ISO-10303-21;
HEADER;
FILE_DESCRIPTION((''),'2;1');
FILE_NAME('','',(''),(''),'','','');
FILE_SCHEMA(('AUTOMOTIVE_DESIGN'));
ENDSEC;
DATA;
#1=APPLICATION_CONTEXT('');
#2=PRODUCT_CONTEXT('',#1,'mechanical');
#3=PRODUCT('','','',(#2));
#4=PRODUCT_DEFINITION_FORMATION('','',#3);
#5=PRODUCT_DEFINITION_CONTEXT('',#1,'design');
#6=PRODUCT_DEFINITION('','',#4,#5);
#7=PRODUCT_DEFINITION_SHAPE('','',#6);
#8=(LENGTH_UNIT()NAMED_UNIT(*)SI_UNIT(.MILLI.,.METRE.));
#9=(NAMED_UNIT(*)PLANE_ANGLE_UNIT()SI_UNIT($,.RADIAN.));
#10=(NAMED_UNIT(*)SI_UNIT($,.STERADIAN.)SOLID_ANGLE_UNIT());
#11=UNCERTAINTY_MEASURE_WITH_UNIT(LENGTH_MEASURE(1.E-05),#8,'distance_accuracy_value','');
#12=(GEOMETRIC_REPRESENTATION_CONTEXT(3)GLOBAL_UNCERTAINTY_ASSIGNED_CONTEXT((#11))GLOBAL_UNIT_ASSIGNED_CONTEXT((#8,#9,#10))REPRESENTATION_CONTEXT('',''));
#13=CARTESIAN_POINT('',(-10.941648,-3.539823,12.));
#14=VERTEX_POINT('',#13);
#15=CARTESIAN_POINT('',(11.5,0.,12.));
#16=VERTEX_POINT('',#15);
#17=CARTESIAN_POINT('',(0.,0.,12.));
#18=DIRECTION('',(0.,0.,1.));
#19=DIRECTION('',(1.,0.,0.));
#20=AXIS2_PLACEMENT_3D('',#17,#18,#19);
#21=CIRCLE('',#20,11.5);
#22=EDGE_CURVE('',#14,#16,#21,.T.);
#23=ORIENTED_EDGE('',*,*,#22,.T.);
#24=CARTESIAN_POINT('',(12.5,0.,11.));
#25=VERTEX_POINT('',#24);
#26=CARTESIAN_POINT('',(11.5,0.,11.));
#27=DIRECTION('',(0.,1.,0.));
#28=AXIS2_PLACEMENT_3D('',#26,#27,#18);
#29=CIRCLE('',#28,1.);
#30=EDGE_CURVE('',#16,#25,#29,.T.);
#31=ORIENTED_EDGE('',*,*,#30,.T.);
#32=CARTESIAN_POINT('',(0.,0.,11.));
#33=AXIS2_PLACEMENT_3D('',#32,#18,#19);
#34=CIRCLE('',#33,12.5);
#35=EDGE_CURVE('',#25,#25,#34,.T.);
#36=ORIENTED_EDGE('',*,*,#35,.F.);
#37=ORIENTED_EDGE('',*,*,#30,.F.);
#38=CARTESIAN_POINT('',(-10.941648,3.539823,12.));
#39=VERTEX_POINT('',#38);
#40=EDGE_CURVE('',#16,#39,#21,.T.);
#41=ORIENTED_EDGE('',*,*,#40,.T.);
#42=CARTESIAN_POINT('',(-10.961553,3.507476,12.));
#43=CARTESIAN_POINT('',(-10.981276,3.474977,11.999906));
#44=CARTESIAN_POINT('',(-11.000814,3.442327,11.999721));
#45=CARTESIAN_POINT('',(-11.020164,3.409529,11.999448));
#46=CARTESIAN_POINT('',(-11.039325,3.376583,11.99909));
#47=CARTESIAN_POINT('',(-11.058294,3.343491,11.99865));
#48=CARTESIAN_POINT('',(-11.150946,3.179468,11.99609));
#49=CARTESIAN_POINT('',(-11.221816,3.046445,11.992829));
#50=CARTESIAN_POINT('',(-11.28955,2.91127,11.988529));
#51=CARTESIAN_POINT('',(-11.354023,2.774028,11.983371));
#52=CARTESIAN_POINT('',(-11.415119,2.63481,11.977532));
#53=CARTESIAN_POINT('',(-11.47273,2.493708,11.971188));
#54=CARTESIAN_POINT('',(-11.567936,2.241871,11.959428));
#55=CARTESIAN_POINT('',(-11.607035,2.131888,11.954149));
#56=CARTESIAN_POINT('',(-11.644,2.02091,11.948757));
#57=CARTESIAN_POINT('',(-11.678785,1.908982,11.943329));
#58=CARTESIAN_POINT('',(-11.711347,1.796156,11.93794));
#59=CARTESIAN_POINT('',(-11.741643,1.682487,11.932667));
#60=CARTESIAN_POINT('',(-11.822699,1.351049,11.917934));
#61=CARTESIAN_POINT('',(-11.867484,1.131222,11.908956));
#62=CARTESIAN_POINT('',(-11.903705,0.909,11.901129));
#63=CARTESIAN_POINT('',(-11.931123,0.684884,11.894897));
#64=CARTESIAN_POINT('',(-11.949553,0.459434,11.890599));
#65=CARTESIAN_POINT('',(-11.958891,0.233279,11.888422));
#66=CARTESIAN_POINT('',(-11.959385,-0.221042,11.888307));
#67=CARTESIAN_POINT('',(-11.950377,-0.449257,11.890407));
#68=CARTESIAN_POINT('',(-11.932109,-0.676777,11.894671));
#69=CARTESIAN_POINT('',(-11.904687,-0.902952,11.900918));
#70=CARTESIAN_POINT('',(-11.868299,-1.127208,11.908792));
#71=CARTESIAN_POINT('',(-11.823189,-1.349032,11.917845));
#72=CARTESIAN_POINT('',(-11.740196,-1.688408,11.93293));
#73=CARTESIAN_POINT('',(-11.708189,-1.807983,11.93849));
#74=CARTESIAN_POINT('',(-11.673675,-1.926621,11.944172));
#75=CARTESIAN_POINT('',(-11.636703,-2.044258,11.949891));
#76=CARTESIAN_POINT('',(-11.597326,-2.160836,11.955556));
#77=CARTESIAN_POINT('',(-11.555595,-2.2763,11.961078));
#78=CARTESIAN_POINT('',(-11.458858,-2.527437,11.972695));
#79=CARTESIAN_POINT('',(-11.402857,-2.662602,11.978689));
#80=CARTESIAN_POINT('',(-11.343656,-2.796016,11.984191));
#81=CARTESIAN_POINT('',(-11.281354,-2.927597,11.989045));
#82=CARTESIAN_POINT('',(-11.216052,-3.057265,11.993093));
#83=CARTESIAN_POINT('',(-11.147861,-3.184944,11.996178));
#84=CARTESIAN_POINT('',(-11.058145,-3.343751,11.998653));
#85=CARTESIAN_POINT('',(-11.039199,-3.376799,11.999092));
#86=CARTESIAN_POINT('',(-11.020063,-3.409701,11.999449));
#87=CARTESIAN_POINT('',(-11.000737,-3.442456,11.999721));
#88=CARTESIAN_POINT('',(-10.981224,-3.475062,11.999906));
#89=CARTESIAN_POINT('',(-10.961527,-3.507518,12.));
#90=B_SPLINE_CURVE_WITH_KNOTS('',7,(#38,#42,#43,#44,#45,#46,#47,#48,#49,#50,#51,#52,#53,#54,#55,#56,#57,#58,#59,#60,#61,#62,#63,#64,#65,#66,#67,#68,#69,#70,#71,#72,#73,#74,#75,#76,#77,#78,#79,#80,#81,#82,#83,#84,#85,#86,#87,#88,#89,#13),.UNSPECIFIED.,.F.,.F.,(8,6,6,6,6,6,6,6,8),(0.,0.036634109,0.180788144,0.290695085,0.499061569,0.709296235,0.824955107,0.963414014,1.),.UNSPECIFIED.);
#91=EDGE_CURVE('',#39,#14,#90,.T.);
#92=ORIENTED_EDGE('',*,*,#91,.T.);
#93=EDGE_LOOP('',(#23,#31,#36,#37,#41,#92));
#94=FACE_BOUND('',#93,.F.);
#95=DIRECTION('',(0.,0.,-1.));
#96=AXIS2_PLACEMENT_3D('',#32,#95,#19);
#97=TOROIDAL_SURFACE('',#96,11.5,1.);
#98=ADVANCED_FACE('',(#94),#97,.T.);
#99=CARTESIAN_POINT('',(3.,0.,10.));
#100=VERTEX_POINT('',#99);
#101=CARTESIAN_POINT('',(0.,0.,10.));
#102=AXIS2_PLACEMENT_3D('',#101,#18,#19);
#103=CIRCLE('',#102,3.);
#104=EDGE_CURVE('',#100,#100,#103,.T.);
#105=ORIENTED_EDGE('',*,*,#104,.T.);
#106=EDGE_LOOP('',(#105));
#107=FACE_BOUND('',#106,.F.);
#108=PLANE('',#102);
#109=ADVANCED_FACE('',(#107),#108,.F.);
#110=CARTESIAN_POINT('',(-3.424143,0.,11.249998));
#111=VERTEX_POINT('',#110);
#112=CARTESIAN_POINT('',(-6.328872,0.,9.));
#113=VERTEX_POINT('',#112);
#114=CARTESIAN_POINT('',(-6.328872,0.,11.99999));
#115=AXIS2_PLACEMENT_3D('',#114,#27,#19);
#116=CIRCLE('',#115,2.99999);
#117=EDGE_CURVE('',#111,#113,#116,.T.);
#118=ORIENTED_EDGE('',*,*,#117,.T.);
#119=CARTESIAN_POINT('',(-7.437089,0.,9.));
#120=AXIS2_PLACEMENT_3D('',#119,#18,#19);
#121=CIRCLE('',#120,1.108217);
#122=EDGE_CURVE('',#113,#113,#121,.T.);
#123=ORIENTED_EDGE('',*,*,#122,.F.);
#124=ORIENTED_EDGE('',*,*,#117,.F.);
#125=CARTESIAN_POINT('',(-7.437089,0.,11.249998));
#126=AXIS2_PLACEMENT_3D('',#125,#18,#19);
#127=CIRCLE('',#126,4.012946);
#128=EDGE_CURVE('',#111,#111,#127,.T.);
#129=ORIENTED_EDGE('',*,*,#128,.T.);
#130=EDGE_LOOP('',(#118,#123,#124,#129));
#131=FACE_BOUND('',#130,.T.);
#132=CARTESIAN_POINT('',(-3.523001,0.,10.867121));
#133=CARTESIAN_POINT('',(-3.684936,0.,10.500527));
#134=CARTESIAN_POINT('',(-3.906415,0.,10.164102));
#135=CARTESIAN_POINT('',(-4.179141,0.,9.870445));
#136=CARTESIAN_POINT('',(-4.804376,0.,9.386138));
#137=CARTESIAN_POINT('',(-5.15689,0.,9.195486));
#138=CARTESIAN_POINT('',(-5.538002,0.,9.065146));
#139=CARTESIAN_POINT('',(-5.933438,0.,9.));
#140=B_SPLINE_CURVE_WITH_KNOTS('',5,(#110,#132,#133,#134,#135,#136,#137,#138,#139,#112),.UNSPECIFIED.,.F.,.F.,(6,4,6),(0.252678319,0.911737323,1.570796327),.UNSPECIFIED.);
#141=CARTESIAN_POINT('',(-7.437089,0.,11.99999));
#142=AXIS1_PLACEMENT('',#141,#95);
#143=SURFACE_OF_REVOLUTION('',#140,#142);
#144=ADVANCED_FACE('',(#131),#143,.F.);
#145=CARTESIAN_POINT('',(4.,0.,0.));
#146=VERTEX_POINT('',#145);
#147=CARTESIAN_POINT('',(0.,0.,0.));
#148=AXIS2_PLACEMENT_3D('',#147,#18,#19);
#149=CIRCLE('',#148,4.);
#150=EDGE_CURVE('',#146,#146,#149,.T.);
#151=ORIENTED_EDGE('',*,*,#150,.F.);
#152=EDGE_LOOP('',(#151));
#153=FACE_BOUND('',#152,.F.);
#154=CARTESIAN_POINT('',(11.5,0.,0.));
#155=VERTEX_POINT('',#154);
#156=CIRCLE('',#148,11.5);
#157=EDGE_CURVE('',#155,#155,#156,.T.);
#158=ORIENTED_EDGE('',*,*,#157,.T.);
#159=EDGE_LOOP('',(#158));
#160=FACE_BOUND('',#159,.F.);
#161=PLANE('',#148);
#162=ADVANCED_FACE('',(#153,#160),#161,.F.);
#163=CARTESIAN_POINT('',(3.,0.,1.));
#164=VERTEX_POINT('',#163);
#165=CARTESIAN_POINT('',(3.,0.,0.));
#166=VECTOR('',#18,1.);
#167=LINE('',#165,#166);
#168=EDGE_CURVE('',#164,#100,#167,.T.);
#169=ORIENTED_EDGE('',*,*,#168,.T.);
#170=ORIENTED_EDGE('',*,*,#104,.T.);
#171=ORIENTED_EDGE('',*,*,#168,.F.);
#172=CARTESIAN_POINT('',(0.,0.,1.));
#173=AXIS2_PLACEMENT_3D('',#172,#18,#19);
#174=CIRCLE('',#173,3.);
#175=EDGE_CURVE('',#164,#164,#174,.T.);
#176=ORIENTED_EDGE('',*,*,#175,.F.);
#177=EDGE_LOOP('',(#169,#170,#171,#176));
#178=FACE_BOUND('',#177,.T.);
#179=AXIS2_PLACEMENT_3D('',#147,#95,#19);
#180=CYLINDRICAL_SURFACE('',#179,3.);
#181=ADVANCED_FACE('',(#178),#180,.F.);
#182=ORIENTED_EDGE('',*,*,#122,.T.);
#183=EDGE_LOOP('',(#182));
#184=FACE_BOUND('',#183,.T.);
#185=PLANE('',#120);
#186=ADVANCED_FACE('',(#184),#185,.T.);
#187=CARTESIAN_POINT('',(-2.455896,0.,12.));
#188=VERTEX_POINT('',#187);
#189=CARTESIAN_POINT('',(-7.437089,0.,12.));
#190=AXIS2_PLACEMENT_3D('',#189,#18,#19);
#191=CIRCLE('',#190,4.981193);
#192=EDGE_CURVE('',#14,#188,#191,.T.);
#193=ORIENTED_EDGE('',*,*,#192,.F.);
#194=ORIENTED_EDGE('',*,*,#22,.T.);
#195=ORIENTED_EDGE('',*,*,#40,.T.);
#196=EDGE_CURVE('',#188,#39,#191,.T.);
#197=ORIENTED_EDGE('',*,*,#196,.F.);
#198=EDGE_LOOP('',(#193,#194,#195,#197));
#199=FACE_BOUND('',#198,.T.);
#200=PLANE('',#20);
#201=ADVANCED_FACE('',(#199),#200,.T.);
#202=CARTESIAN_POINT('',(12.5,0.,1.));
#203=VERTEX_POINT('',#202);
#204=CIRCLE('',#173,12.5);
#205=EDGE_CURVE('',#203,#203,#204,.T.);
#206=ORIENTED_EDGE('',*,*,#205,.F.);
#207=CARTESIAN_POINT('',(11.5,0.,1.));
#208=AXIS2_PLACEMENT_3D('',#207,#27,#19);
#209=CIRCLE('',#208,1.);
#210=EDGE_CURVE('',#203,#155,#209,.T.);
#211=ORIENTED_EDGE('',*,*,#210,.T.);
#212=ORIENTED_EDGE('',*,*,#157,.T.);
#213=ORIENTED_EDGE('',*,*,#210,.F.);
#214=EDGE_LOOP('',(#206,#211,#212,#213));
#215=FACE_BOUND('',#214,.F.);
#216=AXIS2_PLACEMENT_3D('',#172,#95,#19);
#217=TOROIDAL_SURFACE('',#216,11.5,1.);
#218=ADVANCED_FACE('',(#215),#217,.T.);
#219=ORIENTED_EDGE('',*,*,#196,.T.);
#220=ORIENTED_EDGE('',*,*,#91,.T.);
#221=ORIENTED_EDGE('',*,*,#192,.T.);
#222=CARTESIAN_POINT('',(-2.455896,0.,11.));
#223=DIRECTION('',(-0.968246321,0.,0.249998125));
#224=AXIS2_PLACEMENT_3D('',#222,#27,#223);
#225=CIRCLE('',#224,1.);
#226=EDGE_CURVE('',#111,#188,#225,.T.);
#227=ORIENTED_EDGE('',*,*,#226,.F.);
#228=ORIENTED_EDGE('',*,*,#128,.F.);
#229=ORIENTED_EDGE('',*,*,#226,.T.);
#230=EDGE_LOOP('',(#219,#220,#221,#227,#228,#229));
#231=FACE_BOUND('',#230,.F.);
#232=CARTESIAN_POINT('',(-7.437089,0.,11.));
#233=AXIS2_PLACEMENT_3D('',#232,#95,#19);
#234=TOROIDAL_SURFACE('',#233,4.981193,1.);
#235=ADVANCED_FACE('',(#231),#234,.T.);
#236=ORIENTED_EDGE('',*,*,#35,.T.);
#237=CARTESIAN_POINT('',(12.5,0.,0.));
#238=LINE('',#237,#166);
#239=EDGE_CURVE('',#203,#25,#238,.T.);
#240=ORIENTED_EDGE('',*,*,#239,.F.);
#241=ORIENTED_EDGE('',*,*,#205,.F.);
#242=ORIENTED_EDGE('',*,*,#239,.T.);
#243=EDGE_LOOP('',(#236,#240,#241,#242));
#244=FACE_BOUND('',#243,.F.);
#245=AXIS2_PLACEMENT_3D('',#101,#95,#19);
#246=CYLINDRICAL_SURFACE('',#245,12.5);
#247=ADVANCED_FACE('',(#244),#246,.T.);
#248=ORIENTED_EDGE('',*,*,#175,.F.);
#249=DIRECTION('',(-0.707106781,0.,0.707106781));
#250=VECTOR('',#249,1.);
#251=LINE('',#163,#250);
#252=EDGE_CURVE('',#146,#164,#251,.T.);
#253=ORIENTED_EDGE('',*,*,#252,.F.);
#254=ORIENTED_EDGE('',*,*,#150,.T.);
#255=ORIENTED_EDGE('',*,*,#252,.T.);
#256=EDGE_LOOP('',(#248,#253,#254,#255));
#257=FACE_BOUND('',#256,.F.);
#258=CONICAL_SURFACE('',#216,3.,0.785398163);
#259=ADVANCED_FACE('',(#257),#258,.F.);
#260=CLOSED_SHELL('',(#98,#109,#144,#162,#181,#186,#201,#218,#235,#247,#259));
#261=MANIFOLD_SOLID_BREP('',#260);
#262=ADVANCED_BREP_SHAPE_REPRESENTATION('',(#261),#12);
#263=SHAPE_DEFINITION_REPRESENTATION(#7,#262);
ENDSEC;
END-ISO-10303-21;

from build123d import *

# Parameters (mm, degrees)
F0_R     = 12.5
F0_R_2   = 3
F1_DEPTH = 10
F2_R     = 12.5
F2_R_2   = 3
F3_DEPTH = 2
F4_R     = 4.1082069006
F5_DEPTH = 3
F6_R     = 2.99999
F8_R     = 1
F9_SIZE  = 1


# Not quite as in the source:
# - a fillet or chamfer that OpenCascade refuses, or shapes differently, is made with other operations: its cross-section is extruded or revolved along the edge and cut away or added
# - a fillet or chamfer is up to 0.001 mm smaller than in the source, because OpenCascade refuses the exact size


with BuildPart() as f1:
    # F0 (on Top) → F1 (new body)
    with BuildSketch(Plane.XY):
        Circle(F0_R)
        Circle(F0_R_2, mode=Mode.SUBTRACT)
    extrude(amount=F1_DEPTH)

    # F2 (on face) → F3 (join)
    with BuildSketch(Plane.XY.offset(10)):
        Circle(F2_R)
        Circle(F2_R_2, mode=Mode.SUBTRACT)
        Circle(F2_R_2)
    extrude(amount=F3_DEPTH)

    # F4 (on face) → F5 (cut)
    with BuildSketch(Plane.XY.offset(12)):
        with Locations((-7.4370889924, 0)):
            Circle(F4_R)
    extrude(amount=-F5_DEPTH, mode=Mode.SUBTRACT)

    # F6 (radius 3 in the source; OpenCascade refuses exactly that, so slightly less here)
    f6_edges = [f1.edges().sort_by_distance(p)[0] for p in [
        (-11.545296, 0, 9),
    ]]
    fillet(f6_edges, radius=F6_R)

    # F7: fillet of radius 1 on 2 edges, made by hand

    # F7_s1 → F7_t2 (revolve, cut)
    with BuildSketch(Plane.XZ):
        with BuildLine():
            ThreePointArc((11.5, 12), (12.2071067812, 11.7071067812), (12.5, 11))
            Line((12.5, 11), (12.5, 12))
            Line((12.5, 12), (11.5, 12))
        make_face()
    revolve(axis=Axis((0, 0, 12), (0, 0, 1)), mode=Mode.SUBTRACT)

    # F7_s3 → F7_t4 (revolve, cut)
    with BuildSketch(Plane.XZ):
        with BuildLine():
            ThreePointArc((-3.4241428123, 11.249998125), (-3.0682696928, 11.7905688221), (-2.4558964916, 12))
            Line((-2.4558964916, 12), (-2.4558964916, 12.1))
            Line((-2.4558964916, 12.1), (-3.3288820918, 12.1))
            Line((-3.3288820918, 12.1), (-3.4288820918, 12))
            ThreePointArc((-3.4288820918, 12), (-3.4288820918, 11.99999), (-3.5209674443, 11.2749979375))
            Line((-3.5209674443, 11.2749979375), (-3.4241428123, 11.249998125))
        make_face()
    revolve(axis=Axis((-7.4370889924, 0, 12), (0, 0, 1)), mode=Mode.SUBTRACT)

    # F8
    f8_edges = [f1.edges().sort_by_distance(p)[0] for p in [
        (-12.5, 0, 0),
    ]]
    fillet(f8_edges, radius=F8_R)

    # F9
    f9_edges = [f1.edges().sort_by_distance(p)[0] for p in [
        (-3, 0, 0),
    ]]
    chamfer(f9_edges, length=F9_SIZE)


solid = f1.part
